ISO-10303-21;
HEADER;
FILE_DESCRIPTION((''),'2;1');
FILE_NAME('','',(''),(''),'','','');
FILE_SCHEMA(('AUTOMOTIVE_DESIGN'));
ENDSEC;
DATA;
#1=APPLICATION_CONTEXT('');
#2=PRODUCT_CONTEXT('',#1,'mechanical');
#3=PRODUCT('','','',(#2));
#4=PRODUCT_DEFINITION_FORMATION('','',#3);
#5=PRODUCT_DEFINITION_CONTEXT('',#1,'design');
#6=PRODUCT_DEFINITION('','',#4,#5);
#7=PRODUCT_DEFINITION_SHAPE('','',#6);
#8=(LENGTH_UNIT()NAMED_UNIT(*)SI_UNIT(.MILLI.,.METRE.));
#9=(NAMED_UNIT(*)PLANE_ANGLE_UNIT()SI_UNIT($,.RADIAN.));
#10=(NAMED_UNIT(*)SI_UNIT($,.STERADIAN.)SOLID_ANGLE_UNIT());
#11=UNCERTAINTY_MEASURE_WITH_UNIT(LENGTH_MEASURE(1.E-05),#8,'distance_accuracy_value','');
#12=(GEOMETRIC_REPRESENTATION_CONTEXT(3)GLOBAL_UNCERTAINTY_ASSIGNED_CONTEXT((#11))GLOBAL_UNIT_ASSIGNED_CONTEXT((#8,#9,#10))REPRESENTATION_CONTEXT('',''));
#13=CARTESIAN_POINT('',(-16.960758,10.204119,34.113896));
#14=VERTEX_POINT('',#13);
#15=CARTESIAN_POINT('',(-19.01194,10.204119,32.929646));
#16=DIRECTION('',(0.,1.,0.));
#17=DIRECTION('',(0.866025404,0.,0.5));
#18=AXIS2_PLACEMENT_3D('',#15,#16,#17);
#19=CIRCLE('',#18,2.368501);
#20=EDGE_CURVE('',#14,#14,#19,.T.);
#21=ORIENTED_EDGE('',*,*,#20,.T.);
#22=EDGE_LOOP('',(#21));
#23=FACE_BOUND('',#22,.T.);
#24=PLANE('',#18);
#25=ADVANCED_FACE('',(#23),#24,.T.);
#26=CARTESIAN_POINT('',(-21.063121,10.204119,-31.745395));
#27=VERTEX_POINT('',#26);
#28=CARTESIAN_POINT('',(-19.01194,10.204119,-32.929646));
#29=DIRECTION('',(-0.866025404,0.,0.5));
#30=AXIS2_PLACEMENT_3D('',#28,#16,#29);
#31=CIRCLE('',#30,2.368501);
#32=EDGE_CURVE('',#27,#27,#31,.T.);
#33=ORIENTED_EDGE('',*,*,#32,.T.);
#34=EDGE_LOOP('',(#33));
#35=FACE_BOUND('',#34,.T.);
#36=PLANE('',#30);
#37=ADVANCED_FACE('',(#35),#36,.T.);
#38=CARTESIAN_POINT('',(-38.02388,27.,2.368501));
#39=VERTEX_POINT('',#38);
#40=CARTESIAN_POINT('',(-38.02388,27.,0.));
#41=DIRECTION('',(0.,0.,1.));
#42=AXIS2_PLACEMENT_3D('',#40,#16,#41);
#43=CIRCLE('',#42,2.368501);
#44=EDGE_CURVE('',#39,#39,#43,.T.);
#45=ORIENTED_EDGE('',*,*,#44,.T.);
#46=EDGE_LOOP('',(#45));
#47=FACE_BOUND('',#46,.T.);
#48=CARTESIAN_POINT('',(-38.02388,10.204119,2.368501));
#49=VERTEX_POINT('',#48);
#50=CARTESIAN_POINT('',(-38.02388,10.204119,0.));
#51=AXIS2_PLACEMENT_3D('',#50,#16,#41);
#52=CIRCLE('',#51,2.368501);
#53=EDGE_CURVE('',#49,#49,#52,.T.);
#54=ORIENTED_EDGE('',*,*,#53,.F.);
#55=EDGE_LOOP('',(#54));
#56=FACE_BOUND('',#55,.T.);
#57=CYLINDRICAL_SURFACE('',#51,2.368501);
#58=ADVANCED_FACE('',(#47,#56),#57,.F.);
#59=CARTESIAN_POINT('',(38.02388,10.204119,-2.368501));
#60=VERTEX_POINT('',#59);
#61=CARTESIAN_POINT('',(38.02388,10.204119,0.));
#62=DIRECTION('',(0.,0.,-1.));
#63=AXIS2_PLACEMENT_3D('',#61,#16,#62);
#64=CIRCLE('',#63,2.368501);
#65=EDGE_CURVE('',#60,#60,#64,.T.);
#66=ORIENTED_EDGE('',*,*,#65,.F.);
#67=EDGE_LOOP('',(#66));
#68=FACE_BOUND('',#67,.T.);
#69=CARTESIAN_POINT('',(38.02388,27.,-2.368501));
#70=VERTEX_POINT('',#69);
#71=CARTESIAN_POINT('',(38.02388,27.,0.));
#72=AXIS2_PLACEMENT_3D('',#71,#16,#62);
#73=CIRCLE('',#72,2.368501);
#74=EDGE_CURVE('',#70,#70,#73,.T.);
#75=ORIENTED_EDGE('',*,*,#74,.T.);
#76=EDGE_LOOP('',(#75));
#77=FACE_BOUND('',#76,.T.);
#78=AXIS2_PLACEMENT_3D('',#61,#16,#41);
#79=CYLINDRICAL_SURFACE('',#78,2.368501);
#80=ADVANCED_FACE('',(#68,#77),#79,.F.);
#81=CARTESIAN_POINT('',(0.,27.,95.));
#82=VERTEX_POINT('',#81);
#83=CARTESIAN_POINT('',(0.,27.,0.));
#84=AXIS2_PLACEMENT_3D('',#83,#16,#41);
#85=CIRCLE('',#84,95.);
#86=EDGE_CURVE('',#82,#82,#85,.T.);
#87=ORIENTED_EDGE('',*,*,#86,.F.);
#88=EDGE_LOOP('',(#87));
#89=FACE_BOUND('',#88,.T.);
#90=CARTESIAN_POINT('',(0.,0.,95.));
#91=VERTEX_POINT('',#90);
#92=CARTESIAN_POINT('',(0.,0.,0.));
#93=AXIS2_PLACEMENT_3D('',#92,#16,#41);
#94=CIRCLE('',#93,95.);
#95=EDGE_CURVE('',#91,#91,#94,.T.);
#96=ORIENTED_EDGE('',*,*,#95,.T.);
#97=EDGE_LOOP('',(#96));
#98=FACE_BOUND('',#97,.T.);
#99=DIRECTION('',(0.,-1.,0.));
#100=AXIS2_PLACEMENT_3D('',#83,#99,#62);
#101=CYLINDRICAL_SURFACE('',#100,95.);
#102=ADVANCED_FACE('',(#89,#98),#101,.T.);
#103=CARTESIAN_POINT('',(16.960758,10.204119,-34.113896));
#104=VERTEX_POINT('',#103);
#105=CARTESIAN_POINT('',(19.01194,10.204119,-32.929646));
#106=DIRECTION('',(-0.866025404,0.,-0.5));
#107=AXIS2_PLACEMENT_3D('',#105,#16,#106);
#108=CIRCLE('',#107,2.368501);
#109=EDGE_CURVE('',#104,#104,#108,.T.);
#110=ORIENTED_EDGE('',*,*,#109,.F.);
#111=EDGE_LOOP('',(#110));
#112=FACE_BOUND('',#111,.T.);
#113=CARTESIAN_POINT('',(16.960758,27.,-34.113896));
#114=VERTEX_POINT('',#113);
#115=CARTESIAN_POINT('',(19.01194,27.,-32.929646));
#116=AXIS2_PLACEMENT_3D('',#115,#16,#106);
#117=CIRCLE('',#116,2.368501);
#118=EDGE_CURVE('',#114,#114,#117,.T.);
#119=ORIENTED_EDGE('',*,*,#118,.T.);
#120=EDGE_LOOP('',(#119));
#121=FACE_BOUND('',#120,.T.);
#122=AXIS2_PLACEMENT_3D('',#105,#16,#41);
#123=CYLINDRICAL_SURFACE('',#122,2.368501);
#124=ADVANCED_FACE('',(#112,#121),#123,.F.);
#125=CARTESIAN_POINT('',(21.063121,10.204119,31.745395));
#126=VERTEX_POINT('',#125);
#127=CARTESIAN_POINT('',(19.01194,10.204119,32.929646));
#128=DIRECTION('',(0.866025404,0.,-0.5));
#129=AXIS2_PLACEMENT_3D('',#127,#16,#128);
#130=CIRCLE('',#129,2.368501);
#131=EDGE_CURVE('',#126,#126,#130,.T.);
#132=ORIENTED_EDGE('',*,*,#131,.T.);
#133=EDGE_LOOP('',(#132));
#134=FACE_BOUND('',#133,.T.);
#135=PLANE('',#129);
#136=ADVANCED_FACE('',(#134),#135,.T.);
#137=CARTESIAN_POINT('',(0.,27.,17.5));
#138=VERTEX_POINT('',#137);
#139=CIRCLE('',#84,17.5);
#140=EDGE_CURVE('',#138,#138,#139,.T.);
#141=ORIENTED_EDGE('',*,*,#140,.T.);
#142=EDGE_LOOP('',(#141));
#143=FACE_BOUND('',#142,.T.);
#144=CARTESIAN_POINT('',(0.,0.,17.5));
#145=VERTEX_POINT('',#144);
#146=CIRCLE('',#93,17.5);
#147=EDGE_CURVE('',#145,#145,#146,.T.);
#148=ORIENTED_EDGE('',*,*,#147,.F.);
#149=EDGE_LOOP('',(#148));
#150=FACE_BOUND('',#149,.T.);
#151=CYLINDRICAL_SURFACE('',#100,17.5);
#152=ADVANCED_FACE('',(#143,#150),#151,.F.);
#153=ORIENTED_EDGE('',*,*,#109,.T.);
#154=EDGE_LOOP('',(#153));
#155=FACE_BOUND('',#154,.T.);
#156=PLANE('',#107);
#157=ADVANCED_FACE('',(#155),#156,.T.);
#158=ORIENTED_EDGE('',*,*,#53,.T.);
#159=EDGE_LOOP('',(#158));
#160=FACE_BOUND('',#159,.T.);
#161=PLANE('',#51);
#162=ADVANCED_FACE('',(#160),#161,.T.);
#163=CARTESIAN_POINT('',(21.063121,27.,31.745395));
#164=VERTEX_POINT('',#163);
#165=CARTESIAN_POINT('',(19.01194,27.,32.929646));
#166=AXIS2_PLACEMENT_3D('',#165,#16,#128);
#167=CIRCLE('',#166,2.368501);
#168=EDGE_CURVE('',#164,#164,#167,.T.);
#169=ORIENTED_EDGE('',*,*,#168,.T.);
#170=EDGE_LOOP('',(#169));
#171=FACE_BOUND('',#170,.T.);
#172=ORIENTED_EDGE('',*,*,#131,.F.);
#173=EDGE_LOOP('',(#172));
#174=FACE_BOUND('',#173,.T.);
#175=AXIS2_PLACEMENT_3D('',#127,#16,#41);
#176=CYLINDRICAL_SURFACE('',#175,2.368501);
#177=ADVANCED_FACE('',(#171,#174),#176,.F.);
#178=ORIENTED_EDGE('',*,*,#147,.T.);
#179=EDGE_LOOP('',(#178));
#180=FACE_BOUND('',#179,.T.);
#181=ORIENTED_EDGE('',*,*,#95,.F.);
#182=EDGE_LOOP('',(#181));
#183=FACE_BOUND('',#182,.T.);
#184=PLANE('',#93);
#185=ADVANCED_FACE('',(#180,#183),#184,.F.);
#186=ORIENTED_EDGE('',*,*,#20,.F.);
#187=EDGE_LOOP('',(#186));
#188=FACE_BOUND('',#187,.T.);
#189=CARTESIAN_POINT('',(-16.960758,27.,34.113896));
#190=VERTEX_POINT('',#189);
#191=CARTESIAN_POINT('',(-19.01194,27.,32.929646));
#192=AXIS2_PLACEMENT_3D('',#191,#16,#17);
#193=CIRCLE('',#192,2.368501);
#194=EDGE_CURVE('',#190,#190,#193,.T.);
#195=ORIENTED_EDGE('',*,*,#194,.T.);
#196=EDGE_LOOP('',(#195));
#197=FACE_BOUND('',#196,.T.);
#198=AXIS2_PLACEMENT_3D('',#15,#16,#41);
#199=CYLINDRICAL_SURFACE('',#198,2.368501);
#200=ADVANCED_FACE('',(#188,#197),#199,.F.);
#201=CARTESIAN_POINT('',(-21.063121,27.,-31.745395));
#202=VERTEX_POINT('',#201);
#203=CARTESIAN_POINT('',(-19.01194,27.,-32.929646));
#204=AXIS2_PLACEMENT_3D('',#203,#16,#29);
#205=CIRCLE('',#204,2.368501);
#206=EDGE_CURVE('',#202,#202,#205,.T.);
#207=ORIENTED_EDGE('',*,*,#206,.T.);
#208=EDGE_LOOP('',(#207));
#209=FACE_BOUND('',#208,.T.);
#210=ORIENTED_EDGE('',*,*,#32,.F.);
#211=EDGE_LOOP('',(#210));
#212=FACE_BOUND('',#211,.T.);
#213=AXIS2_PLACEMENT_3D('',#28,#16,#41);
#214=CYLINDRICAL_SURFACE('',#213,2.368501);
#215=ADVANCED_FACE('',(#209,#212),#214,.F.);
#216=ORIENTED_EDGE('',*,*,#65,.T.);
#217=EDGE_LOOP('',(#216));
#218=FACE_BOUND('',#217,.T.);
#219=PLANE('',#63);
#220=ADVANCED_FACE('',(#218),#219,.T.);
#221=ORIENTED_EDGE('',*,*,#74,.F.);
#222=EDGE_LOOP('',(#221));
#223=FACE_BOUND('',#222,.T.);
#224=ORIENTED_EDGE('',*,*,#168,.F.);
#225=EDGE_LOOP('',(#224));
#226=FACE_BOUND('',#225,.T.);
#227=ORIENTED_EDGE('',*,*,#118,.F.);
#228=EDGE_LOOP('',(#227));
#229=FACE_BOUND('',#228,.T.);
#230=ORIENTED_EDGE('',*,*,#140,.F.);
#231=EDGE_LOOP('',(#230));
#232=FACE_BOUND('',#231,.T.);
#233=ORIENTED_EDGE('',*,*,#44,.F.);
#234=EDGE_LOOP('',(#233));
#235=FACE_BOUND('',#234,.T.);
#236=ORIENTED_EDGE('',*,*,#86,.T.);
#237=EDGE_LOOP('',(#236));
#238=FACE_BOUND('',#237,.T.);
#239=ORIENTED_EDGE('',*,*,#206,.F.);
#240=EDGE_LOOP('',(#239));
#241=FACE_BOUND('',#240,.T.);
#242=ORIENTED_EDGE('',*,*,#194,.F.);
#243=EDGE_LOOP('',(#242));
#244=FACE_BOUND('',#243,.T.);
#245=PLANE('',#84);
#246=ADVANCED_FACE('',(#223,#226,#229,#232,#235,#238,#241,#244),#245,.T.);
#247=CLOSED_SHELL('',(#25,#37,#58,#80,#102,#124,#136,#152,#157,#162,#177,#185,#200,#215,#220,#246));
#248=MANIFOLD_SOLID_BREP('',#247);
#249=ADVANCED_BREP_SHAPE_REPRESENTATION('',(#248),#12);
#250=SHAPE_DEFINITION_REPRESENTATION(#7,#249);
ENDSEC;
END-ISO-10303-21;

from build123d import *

# Parameters (mm, degrees)
SKETCH1_R           = 95
BOSS_EXTRUDE1_DEPTH = 27
SKETCH2_R           = 17.5
CUT_EXTRUDE1_DEPTH  = 138.03649149
SKETCH3_R           = 2.368500587
CUT_EXTRUDE2_DEPTH  = 16.79588057
CIRPATTERN1_COUNT   = 6


with BuildPart() as part:
    # Sketch1 → Boss-Extrude1 (new body)
    with BuildSketch(Plane(origin=(0, 0, 0), x_dir=(1, 0, 0), z_dir=(0, 1, 0))):
        Circle(SKETCH1_R)
    extrude(amount=BOSS_EXTRUDE1_DEPTH)

    # Sketch2 → Cut-Extrude1 (cut, through all)
    with BuildSketch(Plane(origin=(0, 0, 0), x_dir=(1, 0, 0), z_dir=(0, 1, 0))):
        Circle(SKETCH2_R)
    extrude(amount=CUT_EXTRUDE1_DEPTH, mode=Mode.SUBTRACT)

    # Sketch3 → Cut-Extrude2 (cut)
    with BuildSketch(Plane(origin=(0, 27, 0), x_dir=(1, 0, 0), z_dir=(0, 1, 0))):
        with Locations((-38.023879586, 0)):
            Circle(SKETCH3_R)
    cut_extrude2 = extrude(amount=-CUT_EXTRUDE2_DEPTH, mode=Mode.SUBTRACT)

    # CirPattern1: Cut-Extrude2 ×6 about axis
    cirpattern1_axis = Axis((0, 0, 0), (0, 1, 0))
    for i in range(1, CIRPATTERN1_COUNT):
        add(cut_extrude2.rotate(cirpattern1_axis, i * 360 / CIRPATTERN1_COUNT), mode=Mode.SUBTRACT)


solid = part.part
